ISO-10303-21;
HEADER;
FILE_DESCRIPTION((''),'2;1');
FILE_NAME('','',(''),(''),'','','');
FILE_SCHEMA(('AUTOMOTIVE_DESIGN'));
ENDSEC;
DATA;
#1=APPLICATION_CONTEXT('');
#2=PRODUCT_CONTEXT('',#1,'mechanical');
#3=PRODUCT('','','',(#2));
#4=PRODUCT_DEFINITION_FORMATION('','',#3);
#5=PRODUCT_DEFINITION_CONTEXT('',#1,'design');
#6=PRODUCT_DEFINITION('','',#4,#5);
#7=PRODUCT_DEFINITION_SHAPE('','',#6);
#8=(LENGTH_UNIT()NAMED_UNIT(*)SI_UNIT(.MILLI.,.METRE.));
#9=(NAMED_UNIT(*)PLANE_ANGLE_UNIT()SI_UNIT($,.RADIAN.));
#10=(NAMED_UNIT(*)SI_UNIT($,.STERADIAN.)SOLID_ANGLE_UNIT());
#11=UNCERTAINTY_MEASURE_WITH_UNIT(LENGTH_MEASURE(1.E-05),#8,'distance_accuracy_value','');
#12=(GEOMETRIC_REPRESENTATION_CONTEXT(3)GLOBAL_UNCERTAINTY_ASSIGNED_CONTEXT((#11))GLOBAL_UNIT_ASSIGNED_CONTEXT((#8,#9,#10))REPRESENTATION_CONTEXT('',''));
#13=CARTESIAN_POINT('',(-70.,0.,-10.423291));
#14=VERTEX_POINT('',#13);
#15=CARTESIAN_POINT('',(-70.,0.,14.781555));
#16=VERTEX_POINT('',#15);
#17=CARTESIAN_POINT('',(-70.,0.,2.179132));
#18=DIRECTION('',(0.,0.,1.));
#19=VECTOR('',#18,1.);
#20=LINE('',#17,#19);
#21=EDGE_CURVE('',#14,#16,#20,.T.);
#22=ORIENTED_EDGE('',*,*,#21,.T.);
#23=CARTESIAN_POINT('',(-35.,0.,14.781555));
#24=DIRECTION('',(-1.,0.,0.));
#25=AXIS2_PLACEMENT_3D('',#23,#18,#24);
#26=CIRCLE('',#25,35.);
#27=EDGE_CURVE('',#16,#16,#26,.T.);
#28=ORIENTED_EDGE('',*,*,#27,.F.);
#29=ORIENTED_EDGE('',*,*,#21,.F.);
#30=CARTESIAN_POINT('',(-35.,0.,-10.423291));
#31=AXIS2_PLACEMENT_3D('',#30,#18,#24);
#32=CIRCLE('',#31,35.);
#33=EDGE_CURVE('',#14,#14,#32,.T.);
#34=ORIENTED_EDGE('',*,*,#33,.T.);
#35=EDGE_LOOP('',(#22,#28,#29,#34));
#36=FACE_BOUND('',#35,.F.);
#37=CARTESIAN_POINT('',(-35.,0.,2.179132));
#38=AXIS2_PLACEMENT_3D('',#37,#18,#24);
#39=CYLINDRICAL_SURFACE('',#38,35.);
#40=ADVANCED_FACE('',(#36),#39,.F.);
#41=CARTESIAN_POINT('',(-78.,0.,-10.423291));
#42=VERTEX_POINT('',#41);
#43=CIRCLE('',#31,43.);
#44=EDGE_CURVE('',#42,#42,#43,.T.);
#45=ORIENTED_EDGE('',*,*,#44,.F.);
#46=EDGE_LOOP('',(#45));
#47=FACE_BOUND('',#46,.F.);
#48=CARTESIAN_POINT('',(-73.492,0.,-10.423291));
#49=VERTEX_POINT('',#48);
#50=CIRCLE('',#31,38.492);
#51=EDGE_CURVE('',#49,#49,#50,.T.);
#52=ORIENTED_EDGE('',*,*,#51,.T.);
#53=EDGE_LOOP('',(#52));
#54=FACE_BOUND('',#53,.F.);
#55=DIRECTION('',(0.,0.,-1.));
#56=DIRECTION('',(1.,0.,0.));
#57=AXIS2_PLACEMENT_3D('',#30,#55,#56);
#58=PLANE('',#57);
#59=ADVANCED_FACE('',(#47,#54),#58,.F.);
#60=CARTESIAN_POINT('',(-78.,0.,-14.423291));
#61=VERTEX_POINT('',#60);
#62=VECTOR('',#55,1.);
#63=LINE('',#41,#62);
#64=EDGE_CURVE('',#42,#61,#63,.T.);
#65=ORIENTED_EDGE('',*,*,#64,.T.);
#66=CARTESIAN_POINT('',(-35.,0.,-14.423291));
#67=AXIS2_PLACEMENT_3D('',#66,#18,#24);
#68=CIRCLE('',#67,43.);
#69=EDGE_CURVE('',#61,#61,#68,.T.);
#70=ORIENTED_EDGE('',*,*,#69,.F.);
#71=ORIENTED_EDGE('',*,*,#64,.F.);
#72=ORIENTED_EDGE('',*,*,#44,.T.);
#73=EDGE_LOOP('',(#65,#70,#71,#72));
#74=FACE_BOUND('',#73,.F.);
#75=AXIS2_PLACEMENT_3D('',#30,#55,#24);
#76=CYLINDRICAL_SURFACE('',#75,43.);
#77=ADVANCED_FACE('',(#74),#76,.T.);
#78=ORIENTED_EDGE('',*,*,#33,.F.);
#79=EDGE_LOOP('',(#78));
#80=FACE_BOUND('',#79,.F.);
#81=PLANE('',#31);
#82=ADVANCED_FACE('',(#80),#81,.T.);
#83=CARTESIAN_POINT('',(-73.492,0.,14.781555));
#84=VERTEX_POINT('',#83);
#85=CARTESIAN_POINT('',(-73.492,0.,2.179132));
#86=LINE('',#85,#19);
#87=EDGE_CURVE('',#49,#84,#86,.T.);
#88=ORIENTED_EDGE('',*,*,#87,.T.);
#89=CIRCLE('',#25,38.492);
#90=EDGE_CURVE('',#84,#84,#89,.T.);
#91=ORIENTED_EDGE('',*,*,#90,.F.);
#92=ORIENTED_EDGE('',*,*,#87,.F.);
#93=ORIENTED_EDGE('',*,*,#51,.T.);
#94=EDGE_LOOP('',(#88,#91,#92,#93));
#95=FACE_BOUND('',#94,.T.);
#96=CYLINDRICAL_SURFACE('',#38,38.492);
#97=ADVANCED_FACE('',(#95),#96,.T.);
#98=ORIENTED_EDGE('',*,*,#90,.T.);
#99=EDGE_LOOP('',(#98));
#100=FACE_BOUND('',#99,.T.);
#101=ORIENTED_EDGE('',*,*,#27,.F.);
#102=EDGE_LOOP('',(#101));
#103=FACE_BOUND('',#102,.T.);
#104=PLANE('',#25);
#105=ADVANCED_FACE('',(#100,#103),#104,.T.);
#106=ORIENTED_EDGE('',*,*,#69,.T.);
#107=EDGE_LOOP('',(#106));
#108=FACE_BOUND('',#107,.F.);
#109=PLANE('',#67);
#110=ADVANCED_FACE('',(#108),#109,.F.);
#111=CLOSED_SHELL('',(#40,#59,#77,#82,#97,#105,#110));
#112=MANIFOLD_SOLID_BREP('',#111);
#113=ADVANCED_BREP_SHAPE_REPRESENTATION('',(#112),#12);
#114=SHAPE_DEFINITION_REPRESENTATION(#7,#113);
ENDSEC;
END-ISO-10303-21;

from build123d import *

# Parameters (mm, degrees)
F0_W   = 21.5
F0_H   = 4
F0_W_2 = 13.5
F0_W_3 = 3.492
F0_H_2 = 25.2048466533


# Not quite as in the source:
# - a feature names something its author has since deleted; it is built from what else it names


with BuildPart() as f1:
    # F0 (on Front) → F1 (revolve)
    with BuildSketch(Plane.XZ):
        with Locations((-59.25, -12.4232914925)):
            Rectangle(F0_W, F0_H)
        with Locations((-41.75, -12.4232914925)):
            Rectangle(F0_W_2, F0_H)
        with Locations((-71.746, 2.1791318342)):
            Rectangle(F0_W_3, F0_H_2)
        Polygon((-78, -14.4232914925), (-70, -14.4232914925), (-70, -10.4232914925), (-73.492, -10.4232914925), (-74, -10.4232914925), (-78, -10.4232914925), align=None)
    revolve(axis=Axis((-35, 0, -12.4232914925), (0, 0, 1)))


solid = f1.part
